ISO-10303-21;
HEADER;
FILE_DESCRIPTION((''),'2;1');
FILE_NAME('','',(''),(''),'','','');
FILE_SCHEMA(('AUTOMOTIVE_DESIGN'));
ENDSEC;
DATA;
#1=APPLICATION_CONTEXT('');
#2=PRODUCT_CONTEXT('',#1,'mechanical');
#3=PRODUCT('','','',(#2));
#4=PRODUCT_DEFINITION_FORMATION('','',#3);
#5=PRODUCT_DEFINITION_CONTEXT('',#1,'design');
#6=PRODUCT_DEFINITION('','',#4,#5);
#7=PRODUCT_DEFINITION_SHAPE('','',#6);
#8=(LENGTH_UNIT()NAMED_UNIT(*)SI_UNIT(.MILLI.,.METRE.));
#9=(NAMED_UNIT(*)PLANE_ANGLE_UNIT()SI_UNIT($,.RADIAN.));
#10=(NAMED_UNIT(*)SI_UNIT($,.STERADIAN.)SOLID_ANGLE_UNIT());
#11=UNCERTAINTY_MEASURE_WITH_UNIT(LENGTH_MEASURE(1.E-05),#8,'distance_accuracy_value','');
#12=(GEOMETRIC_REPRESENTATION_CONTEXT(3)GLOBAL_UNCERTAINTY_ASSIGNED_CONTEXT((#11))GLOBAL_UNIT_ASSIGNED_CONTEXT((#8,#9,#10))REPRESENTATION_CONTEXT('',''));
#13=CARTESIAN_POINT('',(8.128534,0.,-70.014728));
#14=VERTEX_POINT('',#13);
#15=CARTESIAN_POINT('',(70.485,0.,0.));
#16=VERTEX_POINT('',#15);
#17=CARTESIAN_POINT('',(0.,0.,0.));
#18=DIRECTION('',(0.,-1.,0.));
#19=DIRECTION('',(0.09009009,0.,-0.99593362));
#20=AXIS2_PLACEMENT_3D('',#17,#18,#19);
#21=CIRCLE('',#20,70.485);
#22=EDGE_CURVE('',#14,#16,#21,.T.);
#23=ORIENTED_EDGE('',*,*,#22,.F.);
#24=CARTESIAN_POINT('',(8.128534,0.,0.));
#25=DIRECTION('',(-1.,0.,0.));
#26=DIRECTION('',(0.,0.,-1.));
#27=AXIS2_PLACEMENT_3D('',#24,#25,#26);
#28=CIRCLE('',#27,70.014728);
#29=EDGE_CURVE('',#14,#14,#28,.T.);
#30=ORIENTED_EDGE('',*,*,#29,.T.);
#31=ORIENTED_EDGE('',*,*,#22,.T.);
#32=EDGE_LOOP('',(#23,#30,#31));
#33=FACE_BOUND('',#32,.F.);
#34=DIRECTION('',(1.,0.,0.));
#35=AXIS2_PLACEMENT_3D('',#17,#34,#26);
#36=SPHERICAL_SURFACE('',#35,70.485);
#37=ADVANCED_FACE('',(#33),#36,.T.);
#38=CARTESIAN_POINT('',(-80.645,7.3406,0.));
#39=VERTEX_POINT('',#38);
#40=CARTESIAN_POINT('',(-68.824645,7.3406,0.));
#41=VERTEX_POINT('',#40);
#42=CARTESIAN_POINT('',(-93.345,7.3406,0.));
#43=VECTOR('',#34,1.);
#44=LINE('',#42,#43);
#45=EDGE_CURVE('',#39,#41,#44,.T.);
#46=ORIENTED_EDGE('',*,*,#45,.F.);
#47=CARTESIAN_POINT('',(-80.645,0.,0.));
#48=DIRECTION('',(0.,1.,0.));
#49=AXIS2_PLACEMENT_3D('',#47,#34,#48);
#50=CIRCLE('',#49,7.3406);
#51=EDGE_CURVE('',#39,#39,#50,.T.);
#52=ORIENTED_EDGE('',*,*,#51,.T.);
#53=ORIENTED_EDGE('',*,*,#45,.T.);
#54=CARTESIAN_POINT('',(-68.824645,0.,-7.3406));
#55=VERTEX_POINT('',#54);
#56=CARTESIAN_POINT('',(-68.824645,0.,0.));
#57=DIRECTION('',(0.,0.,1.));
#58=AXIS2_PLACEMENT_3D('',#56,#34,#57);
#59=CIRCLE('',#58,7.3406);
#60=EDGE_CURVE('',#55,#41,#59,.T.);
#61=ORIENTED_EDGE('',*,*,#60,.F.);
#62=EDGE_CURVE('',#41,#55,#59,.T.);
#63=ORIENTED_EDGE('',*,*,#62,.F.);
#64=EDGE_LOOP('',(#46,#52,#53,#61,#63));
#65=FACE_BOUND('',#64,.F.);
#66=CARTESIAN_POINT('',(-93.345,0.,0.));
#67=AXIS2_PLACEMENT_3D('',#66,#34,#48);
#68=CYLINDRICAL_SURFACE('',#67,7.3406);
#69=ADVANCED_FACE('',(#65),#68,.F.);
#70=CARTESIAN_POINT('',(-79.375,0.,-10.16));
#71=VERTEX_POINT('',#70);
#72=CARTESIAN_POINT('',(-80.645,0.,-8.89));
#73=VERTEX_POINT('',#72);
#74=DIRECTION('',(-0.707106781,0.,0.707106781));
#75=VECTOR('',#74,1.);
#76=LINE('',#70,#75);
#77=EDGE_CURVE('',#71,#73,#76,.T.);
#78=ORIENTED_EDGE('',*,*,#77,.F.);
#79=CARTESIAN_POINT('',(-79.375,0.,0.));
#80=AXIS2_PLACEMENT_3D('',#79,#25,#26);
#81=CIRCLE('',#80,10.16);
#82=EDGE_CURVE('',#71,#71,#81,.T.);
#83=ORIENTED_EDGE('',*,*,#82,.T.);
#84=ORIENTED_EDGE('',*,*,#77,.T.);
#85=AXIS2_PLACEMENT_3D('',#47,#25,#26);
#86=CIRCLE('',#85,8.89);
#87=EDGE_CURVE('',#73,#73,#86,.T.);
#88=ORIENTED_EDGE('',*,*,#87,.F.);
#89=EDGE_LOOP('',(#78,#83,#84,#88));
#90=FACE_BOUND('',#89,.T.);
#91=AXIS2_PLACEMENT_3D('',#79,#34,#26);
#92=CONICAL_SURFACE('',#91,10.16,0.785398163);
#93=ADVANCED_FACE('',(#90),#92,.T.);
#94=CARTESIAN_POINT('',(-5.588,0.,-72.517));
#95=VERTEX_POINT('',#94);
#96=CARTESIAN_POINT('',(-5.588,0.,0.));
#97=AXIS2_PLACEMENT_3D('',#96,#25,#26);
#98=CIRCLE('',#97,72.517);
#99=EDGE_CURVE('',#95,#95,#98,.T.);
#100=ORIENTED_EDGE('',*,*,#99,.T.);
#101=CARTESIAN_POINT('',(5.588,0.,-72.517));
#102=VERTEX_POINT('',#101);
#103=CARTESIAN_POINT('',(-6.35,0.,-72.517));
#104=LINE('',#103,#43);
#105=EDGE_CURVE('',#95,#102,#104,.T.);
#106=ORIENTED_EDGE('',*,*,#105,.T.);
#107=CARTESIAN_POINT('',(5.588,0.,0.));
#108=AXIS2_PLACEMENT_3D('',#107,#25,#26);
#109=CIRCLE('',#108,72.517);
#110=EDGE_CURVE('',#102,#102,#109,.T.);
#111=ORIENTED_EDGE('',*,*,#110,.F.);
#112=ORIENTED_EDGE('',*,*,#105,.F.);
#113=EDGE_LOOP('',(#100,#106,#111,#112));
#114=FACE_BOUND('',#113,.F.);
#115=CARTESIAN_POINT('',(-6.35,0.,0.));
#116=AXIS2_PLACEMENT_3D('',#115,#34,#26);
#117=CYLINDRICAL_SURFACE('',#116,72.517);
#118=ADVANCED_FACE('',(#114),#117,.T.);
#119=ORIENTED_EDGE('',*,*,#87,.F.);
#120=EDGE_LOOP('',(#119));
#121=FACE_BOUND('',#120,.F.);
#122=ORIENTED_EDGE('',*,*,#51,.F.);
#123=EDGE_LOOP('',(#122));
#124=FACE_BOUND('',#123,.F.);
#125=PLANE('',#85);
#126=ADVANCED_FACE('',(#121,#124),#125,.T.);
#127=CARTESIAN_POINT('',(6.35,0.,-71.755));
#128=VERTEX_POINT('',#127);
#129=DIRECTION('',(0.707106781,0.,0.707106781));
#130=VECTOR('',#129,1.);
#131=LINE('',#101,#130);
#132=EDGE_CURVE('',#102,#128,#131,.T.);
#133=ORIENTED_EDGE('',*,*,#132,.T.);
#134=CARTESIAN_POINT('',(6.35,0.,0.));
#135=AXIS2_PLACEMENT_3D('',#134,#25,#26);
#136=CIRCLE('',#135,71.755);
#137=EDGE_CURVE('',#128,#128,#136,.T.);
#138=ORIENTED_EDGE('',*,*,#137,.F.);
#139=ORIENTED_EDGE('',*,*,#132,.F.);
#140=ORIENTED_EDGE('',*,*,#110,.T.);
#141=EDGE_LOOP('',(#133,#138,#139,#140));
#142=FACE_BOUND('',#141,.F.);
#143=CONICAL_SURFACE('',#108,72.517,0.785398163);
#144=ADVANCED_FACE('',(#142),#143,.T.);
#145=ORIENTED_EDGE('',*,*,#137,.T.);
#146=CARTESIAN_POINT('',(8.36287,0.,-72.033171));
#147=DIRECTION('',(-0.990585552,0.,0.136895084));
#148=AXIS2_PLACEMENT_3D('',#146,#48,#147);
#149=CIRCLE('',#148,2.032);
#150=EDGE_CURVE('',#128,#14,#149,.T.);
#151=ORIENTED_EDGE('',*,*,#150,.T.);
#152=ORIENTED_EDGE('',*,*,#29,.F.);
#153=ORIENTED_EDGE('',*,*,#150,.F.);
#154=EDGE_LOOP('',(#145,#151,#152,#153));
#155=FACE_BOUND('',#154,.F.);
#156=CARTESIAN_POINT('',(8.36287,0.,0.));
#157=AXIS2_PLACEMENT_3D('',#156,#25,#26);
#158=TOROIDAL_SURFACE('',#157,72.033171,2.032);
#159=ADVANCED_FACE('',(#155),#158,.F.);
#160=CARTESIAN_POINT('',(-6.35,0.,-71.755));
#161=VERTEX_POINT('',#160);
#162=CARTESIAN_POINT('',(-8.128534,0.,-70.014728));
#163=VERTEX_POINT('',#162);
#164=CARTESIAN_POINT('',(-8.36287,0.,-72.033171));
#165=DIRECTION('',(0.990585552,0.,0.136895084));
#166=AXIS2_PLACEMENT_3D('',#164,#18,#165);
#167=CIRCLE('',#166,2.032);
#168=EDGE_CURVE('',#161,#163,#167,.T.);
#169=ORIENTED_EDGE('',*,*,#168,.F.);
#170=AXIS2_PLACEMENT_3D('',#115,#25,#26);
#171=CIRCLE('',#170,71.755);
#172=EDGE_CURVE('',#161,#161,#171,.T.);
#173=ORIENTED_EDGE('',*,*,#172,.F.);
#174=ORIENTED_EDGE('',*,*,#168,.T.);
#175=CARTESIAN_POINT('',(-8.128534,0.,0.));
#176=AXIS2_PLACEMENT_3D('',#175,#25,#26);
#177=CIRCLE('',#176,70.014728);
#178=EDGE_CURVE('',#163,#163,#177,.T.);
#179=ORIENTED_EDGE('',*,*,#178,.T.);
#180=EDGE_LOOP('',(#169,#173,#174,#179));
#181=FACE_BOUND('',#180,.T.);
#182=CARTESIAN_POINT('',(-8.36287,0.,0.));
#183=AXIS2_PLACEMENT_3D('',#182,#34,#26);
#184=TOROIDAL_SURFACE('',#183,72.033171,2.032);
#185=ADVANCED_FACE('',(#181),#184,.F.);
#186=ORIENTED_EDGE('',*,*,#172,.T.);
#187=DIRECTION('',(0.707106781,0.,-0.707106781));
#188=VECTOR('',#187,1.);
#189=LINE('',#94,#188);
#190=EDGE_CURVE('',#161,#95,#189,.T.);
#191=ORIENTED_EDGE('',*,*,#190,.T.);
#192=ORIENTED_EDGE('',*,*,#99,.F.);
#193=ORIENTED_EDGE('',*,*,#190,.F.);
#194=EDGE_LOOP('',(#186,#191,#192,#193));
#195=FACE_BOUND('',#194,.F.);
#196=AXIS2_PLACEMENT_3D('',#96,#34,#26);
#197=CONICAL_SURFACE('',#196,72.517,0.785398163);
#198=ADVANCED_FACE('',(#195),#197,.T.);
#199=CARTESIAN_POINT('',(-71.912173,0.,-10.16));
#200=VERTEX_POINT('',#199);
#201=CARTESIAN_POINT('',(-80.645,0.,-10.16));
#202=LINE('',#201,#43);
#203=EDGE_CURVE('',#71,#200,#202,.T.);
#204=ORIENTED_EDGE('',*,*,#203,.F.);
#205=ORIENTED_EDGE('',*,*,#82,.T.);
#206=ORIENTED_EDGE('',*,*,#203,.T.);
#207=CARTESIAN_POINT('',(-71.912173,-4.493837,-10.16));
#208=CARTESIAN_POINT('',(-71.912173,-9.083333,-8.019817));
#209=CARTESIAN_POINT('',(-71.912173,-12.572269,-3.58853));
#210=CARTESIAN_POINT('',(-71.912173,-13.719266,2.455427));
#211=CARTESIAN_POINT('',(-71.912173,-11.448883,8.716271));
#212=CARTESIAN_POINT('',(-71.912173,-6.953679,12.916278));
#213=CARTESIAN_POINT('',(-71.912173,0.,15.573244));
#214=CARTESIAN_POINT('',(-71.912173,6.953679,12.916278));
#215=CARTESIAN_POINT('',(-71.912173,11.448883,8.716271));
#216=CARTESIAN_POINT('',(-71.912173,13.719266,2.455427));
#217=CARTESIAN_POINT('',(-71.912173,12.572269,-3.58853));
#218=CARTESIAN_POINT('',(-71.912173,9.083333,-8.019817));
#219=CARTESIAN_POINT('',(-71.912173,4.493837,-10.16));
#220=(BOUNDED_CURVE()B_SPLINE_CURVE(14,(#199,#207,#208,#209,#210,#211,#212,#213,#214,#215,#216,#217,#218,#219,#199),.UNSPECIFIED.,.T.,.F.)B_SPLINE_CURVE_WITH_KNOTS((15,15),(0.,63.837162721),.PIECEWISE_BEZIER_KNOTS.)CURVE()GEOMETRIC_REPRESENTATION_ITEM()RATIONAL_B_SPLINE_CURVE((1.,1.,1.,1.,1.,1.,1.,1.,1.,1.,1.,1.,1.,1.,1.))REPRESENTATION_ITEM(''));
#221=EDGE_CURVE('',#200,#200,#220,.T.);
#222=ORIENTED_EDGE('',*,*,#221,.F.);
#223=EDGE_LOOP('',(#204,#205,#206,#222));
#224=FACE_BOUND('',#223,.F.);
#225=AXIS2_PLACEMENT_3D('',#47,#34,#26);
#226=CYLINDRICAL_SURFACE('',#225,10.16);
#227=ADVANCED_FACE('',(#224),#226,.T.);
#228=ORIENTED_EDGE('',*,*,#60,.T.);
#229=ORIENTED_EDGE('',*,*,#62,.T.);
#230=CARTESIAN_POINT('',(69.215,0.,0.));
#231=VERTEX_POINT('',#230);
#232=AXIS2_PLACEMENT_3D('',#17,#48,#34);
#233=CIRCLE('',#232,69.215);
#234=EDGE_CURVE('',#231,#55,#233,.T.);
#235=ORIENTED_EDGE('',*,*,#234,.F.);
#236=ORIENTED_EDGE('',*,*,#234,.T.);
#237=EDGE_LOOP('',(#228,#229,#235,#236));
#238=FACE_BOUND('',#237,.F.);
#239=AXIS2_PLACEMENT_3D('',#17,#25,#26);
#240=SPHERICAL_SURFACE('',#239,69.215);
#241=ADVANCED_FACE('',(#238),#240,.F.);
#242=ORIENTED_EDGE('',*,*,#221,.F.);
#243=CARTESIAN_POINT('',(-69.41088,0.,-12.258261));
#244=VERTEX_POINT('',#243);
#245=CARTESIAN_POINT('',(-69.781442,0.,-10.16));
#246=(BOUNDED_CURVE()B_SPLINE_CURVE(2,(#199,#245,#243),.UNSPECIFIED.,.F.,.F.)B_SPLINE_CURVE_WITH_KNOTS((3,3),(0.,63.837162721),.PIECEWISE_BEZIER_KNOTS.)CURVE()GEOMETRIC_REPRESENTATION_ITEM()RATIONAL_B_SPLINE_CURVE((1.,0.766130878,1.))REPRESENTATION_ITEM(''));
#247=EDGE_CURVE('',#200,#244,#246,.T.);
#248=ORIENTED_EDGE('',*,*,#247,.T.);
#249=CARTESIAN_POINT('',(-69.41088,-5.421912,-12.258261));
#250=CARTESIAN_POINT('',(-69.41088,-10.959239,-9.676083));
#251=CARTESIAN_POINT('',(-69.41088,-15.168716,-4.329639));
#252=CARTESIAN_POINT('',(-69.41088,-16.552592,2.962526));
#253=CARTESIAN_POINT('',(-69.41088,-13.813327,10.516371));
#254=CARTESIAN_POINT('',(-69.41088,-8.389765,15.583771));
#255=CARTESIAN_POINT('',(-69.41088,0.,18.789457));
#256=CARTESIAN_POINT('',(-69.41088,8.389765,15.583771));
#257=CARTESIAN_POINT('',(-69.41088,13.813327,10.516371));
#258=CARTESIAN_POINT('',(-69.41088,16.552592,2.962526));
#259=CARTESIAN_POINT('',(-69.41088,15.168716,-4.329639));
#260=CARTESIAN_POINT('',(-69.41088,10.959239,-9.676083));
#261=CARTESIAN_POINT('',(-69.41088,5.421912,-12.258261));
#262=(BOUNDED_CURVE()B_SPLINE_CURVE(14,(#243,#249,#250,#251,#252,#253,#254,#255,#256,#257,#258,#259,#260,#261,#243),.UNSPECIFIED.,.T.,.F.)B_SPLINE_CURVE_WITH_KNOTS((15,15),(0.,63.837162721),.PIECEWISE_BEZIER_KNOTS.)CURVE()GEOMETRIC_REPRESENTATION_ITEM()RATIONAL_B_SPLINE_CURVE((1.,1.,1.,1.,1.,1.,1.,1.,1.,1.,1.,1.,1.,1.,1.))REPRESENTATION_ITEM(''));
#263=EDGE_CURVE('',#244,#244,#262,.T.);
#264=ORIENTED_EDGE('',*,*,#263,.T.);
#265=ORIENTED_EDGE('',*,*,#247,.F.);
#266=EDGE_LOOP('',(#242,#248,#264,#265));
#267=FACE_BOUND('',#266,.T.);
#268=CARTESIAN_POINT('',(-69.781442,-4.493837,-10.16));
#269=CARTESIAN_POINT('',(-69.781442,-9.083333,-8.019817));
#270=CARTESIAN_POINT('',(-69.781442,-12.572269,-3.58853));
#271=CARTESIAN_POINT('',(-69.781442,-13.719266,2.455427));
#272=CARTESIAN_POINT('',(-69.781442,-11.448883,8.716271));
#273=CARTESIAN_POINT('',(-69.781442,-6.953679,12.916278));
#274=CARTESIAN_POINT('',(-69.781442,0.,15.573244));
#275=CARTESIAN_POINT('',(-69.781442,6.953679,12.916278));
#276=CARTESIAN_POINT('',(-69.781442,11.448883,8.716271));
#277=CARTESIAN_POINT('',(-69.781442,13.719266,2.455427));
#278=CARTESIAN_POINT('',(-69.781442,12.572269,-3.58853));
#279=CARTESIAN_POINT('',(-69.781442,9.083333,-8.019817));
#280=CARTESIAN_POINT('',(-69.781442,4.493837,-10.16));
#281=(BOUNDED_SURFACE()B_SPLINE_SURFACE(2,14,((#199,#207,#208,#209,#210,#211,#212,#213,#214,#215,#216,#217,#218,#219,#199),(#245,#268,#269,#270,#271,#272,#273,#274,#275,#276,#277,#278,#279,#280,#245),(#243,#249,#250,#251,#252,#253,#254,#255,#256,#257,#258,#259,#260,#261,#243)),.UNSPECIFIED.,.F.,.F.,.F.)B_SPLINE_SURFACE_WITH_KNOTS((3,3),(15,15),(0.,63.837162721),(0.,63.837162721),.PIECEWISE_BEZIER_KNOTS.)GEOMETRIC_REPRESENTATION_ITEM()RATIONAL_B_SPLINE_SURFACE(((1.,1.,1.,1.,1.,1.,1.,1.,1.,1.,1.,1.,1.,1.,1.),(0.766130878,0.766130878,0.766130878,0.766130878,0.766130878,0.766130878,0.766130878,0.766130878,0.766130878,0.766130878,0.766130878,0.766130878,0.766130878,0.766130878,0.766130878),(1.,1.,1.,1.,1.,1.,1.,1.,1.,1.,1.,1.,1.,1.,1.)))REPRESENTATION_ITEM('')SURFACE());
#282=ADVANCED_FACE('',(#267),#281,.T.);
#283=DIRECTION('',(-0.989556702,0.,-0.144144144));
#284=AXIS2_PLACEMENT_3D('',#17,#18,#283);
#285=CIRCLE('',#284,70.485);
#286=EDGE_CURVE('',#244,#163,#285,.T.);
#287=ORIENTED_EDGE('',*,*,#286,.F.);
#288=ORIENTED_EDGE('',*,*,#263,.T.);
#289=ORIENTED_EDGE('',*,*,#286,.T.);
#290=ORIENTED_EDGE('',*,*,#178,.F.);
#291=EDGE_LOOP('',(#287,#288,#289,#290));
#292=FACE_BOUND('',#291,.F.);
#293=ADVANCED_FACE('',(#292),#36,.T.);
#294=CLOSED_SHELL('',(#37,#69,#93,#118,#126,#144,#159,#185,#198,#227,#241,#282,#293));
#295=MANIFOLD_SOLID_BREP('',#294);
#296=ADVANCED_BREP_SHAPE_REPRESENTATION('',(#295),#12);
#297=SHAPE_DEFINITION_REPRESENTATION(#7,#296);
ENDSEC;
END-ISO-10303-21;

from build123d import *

# Parameters (mm, degrees)
F2_R     = 2.54
F4_D     = 14.6812
F4_DEPTH = 12.7
F4_TIP   = 4.41067746
F5_SIZE  = 1.27
F6_SIZE  = 0.762


# Not quite as in the source:
# - a fillet or chamfer that OpenCascade refuses, or shapes differently, is made with other operations: its cross-section is extruded or revolved along the edge and cut away or added


with BuildPart() as f1:
    # F0 (on Front) → F1 (revolve)
    with BuildSketch(Plane.XZ):
        with BuildLine():
            ThreePointArc((-69.7489041133, -10.16), (-70.3007351719, -5.093315157), (-70.485, 0))
            Line((-70.485, 0), (-80.645, 0))
            Line((-80.645, 0), (-80.645, -10.16))
            Line((-80.645, -10.16), (-69.7489041133, -10.16))
        make_face()
        with BuildLine():
            ThreePointArc((69.215, 0), (0, -69.215), (-69.215, 0))
            Line((-69.215, 0), (-70.485, 0))
            ThreePointArc((-70.485, 0), (-70.3007351719, -5.093315157), (-69.7489041133, -10.16))
            ThreePointArc((-69.7489041133, -10.16), (-48.4655816688, -51.1783413028), (-6.35, -70.1983812135))
            ThreePointArc((-6.35, -70.1983812135), (-3.1782326193, -70.4133088444), (0, -70.485))
            ThreePointArc((0, -70.485), (3.1782326193, -70.4133088444), (6.35, -70.1983812135))
            ThreePointArc((6.35, -70.1983812135), (52.0370780069, -47.5423783324), (70.485, 0))
            Line((70.485, 0), (69.215, 0))
        make_face()
        with BuildLine():
            ThreePointArc((0, -70.485), (-3.1782326193, -70.4133088444), (-6.35, -70.1983812135))
            Line((-6.35, -70.1983812135), (-6.35, -72.517))
            Line((-6.35, -72.517), (0, -72.517))
            Line((0, -72.517), (0, -70.485))
        make_face()
        with BuildLine():
            Line((6.35, -72.517), (6.35, -70.1983812135))
            ThreePointArc((6.35, -70.1983812135), (3.1782326193, -70.4133088444), (0, -70.485))
            Line((0, -70.485), (0, -72.517))
            Line((0, -72.517), (6.35, -72.517))
        make_face()
    revolve(axis=Axis((-35.2425, 0, 0), (-1, 0, 0)))

    # F2
    f2_edges = [f1.edges().sort_by_distance(p)[0] for p in [
        (-69.748904, 0, 10.16),
    ]]
    fillet(f2_edges, radius=F2_R)

    # F4
    with Locations(Plane(origin=(-80.645, 0, 0), x_dir=(0, -1, 0), z_dir=(-1, 0, 0))):
        with Locations((0, 0)):
            Hole(F4_D / 2, depth=F4_DEPTH)
            with Locations((0, 0, -(F4_DEPTH + F4_TIP / 2))):  # 118° drill point
                Cone(0, F4_D / 2, F4_TIP, mode=Mode.SUBTRACT)

    # F5
    f5_edges = [f1.edges().sort_by_distance(p)[0] for p in [
        (-80.645, 0, 10.16),
    ]]
    chamfer(f5_edges, length=F5_SIZE)

    # F6
    f6_edges = [f1.edges().sort_by_distance(p)[0] for p in [
        (-6.35, 0, 72.517),
        (6.35, 0, 72.517),
    ]]
    chamfer(f6_edges, length=F6_SIZE)

    # F7: fillet of radius 2.032 on 2 edges, made by hand

    # F7_s1 → F7_t2 (revolve)
    with BuildSketch(Plane.XZ):
        with BuildLine():
            ThreePointArc((-6.35, -71.755), (-6.9417364445, -70.5807921178), (-8.1285337342, -70.0147281958))
            ThreePointArc((-8.1285337342, -70.0147281958), (-7.2398492305, -70.1121944323), (-6.35, -70.1983812135))
            Line((-6.35, -70.1983812135), (-6.35, -71.755))
        make_face()
    revolve(axis=Axis((-6.35, 0, 0), (-1, 0, 0)))

    # F7_s3 → F7_t4 (revolve)
    with BuildSketch(Plane.XZ):
        with BuildLine():
            ThreePointArc((6.35, -71.755), (6.9417364445, -70.5807921178), (8.1285337342, -70.0147281958))
            ThreePointArc((8.1285337342, -70.0147281958), (7.2398492305, -70.1121944323), (6.35, -70.1983812135))
            Line((6.35, -70.1983812135), (6.35, -71.755))
        make_face()
    revolve(axis=Axis((6.35, 0, 0), (-1, 0, 0)))


solid = f1.part
